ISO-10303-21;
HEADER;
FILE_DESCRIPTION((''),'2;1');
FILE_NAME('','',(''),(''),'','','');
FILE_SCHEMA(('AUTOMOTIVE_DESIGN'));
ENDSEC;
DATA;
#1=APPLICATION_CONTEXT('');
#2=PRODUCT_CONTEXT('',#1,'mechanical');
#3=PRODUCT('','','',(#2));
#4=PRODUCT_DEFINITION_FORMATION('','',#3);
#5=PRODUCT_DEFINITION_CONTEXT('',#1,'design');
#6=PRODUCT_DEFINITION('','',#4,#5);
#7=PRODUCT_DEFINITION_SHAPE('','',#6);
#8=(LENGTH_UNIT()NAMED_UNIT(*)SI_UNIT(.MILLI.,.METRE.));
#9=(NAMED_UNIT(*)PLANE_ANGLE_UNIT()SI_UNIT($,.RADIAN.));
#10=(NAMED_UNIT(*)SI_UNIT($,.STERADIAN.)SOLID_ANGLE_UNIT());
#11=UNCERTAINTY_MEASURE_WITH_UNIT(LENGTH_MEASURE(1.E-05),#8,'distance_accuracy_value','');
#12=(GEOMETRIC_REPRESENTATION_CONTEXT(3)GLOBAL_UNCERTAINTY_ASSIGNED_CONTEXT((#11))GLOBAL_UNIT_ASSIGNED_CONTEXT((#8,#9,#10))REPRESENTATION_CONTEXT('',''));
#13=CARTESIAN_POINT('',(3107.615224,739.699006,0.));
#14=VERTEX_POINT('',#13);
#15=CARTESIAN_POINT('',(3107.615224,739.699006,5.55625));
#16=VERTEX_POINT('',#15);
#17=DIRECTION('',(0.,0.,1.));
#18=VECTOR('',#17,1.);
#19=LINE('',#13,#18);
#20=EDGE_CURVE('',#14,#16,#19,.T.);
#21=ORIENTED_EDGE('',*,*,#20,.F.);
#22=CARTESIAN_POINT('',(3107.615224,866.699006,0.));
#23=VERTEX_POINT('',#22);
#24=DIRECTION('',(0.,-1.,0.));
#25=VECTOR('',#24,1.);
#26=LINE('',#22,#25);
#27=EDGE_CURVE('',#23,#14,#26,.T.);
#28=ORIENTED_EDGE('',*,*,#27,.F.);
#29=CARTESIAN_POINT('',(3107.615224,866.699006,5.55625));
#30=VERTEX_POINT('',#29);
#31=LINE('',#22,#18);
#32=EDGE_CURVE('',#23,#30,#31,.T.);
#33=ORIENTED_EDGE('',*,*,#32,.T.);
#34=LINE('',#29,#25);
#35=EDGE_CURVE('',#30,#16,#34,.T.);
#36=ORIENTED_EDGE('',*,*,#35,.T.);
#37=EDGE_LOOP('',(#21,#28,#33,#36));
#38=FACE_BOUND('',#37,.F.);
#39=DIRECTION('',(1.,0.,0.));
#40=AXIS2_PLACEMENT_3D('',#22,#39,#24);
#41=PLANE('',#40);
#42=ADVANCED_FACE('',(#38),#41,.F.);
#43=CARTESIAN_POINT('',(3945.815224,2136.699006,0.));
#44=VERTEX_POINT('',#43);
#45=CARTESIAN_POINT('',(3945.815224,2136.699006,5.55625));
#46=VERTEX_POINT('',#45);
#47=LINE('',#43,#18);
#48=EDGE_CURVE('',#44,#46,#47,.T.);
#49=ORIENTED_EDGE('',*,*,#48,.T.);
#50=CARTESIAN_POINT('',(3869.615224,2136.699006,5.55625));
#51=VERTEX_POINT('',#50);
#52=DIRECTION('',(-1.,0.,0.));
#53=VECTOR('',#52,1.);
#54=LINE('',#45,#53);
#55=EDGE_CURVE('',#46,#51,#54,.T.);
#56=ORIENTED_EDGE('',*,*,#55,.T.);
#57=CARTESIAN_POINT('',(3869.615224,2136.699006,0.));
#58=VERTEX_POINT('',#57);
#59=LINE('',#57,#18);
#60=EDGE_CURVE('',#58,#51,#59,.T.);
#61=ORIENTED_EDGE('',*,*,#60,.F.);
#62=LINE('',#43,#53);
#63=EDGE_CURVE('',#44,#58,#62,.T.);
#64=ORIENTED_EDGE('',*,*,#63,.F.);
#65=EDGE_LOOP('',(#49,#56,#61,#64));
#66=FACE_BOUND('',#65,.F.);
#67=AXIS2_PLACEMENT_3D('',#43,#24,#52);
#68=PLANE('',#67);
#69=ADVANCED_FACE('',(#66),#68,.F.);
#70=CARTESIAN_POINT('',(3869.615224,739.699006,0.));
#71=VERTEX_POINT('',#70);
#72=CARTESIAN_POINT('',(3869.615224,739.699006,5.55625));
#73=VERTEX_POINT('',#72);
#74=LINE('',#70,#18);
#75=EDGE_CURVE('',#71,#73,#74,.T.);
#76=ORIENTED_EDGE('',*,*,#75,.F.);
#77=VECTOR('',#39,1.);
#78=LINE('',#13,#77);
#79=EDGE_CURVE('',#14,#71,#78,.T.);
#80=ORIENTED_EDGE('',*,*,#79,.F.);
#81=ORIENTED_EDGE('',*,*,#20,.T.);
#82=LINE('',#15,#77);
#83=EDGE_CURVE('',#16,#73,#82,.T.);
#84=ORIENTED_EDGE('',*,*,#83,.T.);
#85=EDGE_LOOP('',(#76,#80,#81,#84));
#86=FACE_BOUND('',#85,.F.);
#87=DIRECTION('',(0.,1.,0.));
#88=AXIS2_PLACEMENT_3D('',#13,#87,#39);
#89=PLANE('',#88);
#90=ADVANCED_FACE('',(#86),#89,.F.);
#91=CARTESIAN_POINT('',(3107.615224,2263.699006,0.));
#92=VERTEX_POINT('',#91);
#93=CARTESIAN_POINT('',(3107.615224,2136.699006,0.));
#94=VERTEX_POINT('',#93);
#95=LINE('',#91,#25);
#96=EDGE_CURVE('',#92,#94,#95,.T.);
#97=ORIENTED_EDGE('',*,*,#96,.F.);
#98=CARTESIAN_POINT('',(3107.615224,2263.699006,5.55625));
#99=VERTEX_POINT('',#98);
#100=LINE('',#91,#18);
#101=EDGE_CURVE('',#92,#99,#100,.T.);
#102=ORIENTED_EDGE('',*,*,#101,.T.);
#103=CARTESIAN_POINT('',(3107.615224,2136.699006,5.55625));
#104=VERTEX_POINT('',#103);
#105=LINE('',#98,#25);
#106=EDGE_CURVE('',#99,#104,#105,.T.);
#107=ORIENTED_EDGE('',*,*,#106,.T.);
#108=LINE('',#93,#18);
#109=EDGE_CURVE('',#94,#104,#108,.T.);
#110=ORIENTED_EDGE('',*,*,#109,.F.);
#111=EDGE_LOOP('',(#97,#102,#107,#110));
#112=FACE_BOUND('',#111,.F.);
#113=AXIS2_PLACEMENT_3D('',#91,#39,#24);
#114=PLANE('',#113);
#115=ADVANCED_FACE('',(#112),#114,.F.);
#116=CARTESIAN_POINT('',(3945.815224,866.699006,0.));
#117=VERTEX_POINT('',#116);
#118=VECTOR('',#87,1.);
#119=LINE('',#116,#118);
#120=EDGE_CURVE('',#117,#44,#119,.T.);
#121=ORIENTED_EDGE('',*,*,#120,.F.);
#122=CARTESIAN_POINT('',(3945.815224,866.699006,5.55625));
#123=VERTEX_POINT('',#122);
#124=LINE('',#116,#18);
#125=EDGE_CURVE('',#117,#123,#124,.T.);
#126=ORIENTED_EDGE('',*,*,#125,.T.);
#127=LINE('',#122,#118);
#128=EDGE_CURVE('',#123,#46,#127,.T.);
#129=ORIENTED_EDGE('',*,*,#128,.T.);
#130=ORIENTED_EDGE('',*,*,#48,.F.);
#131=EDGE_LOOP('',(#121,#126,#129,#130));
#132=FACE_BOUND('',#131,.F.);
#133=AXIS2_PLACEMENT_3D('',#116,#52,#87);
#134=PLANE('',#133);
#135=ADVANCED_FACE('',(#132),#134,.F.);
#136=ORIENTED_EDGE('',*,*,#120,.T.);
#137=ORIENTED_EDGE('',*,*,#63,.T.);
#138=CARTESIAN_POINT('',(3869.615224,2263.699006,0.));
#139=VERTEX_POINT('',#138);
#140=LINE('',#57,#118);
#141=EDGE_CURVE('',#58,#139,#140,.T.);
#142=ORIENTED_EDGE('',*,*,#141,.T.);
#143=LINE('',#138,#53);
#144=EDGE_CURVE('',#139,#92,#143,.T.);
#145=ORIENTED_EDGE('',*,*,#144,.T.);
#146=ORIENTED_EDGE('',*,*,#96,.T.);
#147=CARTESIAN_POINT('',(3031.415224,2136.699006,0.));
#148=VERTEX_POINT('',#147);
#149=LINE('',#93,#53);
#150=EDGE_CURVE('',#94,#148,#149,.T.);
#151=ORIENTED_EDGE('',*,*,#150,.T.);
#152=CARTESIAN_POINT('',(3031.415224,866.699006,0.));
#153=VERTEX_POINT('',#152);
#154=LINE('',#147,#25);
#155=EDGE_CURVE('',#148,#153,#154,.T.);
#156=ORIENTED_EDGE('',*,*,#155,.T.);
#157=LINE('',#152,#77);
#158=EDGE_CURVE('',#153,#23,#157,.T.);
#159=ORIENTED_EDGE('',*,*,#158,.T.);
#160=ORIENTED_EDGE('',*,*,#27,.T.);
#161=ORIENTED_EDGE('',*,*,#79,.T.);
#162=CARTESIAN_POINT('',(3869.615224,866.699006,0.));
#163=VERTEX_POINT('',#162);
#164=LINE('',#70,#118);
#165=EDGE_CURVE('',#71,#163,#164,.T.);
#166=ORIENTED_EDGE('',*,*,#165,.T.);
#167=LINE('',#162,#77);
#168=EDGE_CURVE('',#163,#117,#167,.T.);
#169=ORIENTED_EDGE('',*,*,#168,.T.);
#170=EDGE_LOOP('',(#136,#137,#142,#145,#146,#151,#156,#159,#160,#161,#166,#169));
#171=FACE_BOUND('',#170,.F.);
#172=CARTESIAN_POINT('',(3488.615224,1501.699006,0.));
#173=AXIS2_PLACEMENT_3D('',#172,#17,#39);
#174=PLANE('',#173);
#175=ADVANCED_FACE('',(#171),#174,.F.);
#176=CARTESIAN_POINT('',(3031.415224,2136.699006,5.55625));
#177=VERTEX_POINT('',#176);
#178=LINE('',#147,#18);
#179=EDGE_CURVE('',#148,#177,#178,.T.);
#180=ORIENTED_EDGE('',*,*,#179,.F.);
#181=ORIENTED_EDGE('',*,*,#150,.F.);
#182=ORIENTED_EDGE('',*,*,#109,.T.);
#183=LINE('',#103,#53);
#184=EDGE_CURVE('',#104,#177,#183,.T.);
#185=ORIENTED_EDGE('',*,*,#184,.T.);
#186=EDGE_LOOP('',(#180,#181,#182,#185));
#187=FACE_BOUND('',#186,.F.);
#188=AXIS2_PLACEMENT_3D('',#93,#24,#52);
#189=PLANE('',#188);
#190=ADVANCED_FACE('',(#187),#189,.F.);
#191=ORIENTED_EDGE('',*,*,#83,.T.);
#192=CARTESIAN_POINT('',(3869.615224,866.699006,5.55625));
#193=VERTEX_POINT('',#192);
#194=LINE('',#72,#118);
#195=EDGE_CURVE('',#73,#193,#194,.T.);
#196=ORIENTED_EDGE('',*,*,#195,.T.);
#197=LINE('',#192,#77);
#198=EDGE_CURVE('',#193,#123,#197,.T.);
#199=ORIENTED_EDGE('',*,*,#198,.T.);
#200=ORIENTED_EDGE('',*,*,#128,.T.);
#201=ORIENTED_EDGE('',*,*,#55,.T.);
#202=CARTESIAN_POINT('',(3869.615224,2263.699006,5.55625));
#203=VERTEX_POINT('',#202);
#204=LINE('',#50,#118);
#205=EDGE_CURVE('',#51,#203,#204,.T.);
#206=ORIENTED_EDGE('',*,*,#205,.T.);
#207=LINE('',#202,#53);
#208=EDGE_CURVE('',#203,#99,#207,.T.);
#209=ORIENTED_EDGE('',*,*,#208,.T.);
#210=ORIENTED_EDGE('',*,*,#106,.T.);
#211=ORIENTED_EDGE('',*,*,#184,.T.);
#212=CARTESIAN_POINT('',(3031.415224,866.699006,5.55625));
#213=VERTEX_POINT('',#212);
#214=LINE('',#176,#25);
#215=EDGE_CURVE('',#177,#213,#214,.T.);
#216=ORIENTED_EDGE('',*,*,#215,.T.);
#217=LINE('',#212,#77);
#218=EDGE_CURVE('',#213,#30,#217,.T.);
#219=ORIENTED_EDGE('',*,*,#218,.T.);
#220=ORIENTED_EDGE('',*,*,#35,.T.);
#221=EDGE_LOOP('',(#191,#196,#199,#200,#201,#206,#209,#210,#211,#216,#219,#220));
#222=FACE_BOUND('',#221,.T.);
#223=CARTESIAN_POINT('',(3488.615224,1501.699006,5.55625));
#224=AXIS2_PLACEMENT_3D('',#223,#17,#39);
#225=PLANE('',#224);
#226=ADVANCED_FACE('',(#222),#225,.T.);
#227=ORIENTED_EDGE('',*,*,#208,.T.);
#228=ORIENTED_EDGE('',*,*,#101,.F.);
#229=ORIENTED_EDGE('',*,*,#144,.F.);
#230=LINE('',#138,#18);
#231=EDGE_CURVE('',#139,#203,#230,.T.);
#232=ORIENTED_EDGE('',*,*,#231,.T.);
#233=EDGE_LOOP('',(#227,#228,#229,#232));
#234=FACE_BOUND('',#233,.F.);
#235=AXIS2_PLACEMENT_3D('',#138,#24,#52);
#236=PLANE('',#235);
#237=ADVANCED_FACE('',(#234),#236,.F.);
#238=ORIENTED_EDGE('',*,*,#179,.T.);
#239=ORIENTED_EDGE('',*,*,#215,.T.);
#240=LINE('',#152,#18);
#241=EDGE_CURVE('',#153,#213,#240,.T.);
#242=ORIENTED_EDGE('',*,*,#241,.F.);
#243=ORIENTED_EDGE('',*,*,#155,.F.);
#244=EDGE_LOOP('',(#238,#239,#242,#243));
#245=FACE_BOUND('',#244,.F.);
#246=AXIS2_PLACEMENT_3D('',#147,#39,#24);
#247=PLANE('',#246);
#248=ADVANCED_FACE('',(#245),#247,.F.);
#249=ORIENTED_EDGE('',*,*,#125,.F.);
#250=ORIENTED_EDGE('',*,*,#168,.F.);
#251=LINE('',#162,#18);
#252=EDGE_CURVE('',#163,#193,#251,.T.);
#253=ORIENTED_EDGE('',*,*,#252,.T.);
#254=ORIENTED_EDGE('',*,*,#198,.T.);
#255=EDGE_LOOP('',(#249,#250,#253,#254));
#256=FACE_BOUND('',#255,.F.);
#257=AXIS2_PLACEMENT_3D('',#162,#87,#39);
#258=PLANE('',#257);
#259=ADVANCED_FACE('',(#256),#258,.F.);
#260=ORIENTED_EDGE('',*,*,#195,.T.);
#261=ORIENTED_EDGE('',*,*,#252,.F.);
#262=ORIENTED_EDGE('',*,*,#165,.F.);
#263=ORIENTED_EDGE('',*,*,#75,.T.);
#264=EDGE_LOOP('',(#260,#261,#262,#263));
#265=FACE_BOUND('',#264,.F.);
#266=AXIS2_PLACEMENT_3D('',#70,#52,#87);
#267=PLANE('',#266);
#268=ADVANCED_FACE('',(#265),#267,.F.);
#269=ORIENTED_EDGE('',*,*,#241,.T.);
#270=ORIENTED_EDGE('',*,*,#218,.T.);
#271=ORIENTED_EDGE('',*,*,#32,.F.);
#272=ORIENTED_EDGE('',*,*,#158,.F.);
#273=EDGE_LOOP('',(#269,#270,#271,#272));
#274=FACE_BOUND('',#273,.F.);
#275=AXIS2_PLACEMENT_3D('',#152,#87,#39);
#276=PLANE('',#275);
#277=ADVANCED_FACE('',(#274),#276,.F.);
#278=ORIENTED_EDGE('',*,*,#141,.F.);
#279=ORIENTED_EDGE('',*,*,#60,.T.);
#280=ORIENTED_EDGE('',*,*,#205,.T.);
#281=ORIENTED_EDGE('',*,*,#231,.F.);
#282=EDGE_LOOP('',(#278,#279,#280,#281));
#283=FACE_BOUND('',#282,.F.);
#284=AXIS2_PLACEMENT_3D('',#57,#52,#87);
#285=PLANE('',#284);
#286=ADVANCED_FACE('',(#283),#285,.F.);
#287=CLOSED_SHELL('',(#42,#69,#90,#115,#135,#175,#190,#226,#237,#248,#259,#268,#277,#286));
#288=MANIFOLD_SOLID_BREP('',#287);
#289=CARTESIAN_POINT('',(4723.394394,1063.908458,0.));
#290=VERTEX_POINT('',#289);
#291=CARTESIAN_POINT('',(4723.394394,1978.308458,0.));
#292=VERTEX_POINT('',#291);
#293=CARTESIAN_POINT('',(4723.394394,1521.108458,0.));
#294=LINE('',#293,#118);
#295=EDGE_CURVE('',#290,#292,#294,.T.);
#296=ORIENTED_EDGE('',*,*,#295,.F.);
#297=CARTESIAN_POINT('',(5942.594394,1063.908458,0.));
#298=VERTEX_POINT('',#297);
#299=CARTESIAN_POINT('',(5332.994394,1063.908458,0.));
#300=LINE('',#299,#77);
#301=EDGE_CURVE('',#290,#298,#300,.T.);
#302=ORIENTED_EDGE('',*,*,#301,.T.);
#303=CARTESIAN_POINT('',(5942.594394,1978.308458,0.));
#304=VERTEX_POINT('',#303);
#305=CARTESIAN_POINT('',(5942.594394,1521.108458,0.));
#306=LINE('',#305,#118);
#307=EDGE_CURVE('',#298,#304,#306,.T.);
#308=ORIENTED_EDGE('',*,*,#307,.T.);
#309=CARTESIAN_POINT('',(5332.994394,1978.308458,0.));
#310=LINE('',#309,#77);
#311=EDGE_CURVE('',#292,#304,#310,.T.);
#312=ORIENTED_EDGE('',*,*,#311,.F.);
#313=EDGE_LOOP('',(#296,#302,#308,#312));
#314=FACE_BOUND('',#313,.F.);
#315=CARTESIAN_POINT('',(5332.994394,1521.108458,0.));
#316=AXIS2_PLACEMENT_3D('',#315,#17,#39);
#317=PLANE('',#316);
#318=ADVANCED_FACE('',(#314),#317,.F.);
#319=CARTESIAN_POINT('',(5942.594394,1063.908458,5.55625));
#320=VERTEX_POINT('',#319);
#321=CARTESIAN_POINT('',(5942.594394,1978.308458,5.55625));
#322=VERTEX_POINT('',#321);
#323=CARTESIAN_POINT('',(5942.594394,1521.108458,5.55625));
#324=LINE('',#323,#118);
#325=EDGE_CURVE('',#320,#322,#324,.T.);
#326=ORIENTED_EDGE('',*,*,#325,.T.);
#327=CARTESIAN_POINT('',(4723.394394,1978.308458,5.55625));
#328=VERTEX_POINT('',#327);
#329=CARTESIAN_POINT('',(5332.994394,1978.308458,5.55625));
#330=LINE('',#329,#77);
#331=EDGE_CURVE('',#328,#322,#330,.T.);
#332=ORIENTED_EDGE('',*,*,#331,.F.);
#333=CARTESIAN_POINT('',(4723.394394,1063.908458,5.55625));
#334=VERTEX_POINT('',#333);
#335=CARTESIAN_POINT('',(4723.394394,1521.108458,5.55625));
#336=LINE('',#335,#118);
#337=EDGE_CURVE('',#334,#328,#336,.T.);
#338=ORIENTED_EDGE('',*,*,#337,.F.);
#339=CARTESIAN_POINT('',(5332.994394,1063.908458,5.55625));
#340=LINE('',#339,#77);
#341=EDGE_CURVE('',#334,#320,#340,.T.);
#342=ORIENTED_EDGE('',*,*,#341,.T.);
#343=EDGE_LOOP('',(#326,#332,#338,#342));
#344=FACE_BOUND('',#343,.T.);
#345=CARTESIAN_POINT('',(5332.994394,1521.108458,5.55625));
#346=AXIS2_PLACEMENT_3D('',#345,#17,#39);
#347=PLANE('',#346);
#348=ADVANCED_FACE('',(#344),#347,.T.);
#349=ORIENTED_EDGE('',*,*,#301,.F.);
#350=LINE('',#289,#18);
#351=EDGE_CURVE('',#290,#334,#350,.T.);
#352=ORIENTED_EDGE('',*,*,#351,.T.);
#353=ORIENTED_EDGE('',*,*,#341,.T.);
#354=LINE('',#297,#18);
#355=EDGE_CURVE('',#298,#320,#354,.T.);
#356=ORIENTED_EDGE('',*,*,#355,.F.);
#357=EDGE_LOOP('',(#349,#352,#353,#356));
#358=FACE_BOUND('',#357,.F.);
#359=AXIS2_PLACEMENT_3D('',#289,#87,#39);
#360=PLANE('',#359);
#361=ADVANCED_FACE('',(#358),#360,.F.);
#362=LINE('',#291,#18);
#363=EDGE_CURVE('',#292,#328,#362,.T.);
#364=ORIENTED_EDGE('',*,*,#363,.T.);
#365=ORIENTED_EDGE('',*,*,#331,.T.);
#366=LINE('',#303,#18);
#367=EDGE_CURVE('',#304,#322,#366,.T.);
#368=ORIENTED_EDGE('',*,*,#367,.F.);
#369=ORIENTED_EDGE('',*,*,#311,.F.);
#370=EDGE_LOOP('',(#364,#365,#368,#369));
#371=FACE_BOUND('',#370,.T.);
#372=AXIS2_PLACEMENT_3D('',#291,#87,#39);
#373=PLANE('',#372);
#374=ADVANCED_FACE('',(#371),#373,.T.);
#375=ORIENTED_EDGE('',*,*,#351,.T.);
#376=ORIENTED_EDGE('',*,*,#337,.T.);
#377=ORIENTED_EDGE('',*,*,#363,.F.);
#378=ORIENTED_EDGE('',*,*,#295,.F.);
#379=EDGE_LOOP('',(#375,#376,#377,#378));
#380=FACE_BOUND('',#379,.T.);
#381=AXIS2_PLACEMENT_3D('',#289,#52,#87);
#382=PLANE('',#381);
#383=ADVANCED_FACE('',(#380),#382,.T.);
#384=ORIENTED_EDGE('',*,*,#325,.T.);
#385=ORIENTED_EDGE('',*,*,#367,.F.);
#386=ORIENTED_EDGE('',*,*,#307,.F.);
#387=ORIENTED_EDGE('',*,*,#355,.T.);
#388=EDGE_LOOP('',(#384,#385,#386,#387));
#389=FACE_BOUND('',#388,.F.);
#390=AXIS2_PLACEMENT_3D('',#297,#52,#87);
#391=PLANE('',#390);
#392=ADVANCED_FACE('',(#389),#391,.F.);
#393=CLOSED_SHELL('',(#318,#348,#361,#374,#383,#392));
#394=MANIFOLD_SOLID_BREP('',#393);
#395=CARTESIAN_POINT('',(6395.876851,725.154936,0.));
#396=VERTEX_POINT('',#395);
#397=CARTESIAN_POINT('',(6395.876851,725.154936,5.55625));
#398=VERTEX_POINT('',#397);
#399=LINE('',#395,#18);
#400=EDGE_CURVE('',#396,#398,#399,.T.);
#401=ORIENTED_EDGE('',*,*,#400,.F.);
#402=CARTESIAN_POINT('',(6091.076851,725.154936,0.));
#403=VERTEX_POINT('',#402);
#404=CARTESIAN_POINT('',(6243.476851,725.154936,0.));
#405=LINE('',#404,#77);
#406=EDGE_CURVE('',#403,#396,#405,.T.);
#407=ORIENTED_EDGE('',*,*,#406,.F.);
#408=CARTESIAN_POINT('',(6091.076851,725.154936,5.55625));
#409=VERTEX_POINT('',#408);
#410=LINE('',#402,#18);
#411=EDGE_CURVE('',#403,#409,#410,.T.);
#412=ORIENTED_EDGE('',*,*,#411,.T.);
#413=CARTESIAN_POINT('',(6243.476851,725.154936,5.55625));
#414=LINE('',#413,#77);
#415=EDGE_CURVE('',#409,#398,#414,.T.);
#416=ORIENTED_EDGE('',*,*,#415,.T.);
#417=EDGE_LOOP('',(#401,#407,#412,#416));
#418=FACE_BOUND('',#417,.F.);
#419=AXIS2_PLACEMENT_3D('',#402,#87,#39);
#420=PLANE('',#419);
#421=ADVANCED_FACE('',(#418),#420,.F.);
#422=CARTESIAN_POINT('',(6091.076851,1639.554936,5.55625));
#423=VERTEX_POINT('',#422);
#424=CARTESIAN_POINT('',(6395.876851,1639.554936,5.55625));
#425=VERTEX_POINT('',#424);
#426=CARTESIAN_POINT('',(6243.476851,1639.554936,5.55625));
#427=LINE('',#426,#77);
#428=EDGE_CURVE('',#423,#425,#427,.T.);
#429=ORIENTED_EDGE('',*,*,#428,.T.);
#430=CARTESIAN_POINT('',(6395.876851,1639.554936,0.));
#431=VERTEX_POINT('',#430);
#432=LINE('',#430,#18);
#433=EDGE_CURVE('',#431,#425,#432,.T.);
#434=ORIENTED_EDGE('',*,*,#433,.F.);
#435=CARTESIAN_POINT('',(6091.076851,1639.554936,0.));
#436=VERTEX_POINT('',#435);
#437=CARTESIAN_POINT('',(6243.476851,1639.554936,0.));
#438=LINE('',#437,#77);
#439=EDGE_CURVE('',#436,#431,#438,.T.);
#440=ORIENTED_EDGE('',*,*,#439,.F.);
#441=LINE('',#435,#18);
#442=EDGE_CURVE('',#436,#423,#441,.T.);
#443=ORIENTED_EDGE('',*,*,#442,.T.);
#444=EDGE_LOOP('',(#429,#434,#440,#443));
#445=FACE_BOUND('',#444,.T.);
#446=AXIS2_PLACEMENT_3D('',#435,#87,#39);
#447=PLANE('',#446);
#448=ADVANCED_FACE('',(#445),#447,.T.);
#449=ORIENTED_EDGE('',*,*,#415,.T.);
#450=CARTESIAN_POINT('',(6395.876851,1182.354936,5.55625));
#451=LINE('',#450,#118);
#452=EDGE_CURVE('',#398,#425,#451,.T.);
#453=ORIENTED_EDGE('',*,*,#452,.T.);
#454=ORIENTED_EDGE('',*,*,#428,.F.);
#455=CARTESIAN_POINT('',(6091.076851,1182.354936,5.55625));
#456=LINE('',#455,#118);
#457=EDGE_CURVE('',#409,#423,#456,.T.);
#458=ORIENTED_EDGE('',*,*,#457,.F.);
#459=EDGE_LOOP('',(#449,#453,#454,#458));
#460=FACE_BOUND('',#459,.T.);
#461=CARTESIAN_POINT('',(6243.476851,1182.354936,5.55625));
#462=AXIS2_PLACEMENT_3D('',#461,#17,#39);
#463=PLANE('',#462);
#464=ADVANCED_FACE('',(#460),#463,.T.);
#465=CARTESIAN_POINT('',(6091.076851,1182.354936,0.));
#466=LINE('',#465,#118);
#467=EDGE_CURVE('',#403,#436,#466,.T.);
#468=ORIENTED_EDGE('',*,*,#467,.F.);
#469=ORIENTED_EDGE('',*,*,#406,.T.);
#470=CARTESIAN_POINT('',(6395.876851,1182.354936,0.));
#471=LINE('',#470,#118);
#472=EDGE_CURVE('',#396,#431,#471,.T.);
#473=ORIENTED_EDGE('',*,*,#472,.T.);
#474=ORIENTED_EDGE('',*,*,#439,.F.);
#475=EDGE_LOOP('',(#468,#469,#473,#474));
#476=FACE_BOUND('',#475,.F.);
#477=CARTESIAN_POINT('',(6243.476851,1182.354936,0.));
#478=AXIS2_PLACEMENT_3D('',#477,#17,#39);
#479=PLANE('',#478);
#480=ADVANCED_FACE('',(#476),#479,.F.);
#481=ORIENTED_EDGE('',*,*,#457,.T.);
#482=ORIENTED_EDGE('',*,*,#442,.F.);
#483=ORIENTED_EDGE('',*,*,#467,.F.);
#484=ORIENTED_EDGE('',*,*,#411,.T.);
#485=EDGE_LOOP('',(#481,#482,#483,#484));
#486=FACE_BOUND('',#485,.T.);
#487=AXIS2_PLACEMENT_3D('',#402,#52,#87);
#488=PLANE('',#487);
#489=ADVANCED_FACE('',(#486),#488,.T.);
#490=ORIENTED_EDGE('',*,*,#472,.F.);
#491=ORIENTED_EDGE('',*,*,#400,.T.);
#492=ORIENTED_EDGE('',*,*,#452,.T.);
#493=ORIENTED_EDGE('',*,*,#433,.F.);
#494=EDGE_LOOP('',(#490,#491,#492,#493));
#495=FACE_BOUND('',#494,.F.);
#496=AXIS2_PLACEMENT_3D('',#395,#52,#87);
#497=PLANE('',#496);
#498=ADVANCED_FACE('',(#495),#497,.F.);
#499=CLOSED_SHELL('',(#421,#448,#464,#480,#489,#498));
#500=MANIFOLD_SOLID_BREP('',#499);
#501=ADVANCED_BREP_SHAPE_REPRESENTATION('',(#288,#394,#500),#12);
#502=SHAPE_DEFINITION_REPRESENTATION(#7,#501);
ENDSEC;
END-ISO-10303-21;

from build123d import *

# Parameters (mm, degrees)
F1_DEPTH = 5.55625
F0_W     = 1219.2
F0_H     = 914.4
F2_DEPTH = 5.55625
F0_W_2   = 304.8
F3_DEPTH = 5.55625


# Not quite as in the source:
# - a length typed as a fraction of an inch, garbled in the dataset ("3 / 203.2 mm" for 3/8 in), is restored


with BuildPart() as f1:
    # F0 (on Top) → F1 (new body)
    with BuildSketch(Plane.XY):
        Polygon((3107.6152240753, 866.6990060806), (3107.6152240753, 739.6990060806), (3869.6152240753, 739.6990060806), (3869.6152240753, 866.6990060806), (3945.8152240753, 866.6990060806), (3945.8152240753, 2136.6990060806), (3869.6152240753, 2136.6990060806), (3869.6152240753, 2263.6990060806), (3107.6152240753, 2263.6990060806), (3107.6152240753, 2136.6990060806), (3031.4152240753, 2136.6990060806), (3031.4152240753, 866.6990060806), align=None)
    extrude(amount=F1_DEPTH)


with BuildPart() as f2:
    # F0 (on Top) → F2 (new body)
    with BuildSketch(Plane.XY):
        with Locations((5332.9943939209, 1521.108457756)):
            Rectangle(F0_W, F0_H)
    extrude(amount=F2_DEPTH)


with BuildPart() as f3:
    # F0 (on Top) → F3 (new body)
    with BuildSketch(Plane.XY):
        with Locations((6243.4768508911, 1182.3549363136)):
            Rectangle(F0_W_2, F0_H)
    extrude(amount=F3_DEPTH)


solid = Compound([f1.part, f2.part, f3.part])
